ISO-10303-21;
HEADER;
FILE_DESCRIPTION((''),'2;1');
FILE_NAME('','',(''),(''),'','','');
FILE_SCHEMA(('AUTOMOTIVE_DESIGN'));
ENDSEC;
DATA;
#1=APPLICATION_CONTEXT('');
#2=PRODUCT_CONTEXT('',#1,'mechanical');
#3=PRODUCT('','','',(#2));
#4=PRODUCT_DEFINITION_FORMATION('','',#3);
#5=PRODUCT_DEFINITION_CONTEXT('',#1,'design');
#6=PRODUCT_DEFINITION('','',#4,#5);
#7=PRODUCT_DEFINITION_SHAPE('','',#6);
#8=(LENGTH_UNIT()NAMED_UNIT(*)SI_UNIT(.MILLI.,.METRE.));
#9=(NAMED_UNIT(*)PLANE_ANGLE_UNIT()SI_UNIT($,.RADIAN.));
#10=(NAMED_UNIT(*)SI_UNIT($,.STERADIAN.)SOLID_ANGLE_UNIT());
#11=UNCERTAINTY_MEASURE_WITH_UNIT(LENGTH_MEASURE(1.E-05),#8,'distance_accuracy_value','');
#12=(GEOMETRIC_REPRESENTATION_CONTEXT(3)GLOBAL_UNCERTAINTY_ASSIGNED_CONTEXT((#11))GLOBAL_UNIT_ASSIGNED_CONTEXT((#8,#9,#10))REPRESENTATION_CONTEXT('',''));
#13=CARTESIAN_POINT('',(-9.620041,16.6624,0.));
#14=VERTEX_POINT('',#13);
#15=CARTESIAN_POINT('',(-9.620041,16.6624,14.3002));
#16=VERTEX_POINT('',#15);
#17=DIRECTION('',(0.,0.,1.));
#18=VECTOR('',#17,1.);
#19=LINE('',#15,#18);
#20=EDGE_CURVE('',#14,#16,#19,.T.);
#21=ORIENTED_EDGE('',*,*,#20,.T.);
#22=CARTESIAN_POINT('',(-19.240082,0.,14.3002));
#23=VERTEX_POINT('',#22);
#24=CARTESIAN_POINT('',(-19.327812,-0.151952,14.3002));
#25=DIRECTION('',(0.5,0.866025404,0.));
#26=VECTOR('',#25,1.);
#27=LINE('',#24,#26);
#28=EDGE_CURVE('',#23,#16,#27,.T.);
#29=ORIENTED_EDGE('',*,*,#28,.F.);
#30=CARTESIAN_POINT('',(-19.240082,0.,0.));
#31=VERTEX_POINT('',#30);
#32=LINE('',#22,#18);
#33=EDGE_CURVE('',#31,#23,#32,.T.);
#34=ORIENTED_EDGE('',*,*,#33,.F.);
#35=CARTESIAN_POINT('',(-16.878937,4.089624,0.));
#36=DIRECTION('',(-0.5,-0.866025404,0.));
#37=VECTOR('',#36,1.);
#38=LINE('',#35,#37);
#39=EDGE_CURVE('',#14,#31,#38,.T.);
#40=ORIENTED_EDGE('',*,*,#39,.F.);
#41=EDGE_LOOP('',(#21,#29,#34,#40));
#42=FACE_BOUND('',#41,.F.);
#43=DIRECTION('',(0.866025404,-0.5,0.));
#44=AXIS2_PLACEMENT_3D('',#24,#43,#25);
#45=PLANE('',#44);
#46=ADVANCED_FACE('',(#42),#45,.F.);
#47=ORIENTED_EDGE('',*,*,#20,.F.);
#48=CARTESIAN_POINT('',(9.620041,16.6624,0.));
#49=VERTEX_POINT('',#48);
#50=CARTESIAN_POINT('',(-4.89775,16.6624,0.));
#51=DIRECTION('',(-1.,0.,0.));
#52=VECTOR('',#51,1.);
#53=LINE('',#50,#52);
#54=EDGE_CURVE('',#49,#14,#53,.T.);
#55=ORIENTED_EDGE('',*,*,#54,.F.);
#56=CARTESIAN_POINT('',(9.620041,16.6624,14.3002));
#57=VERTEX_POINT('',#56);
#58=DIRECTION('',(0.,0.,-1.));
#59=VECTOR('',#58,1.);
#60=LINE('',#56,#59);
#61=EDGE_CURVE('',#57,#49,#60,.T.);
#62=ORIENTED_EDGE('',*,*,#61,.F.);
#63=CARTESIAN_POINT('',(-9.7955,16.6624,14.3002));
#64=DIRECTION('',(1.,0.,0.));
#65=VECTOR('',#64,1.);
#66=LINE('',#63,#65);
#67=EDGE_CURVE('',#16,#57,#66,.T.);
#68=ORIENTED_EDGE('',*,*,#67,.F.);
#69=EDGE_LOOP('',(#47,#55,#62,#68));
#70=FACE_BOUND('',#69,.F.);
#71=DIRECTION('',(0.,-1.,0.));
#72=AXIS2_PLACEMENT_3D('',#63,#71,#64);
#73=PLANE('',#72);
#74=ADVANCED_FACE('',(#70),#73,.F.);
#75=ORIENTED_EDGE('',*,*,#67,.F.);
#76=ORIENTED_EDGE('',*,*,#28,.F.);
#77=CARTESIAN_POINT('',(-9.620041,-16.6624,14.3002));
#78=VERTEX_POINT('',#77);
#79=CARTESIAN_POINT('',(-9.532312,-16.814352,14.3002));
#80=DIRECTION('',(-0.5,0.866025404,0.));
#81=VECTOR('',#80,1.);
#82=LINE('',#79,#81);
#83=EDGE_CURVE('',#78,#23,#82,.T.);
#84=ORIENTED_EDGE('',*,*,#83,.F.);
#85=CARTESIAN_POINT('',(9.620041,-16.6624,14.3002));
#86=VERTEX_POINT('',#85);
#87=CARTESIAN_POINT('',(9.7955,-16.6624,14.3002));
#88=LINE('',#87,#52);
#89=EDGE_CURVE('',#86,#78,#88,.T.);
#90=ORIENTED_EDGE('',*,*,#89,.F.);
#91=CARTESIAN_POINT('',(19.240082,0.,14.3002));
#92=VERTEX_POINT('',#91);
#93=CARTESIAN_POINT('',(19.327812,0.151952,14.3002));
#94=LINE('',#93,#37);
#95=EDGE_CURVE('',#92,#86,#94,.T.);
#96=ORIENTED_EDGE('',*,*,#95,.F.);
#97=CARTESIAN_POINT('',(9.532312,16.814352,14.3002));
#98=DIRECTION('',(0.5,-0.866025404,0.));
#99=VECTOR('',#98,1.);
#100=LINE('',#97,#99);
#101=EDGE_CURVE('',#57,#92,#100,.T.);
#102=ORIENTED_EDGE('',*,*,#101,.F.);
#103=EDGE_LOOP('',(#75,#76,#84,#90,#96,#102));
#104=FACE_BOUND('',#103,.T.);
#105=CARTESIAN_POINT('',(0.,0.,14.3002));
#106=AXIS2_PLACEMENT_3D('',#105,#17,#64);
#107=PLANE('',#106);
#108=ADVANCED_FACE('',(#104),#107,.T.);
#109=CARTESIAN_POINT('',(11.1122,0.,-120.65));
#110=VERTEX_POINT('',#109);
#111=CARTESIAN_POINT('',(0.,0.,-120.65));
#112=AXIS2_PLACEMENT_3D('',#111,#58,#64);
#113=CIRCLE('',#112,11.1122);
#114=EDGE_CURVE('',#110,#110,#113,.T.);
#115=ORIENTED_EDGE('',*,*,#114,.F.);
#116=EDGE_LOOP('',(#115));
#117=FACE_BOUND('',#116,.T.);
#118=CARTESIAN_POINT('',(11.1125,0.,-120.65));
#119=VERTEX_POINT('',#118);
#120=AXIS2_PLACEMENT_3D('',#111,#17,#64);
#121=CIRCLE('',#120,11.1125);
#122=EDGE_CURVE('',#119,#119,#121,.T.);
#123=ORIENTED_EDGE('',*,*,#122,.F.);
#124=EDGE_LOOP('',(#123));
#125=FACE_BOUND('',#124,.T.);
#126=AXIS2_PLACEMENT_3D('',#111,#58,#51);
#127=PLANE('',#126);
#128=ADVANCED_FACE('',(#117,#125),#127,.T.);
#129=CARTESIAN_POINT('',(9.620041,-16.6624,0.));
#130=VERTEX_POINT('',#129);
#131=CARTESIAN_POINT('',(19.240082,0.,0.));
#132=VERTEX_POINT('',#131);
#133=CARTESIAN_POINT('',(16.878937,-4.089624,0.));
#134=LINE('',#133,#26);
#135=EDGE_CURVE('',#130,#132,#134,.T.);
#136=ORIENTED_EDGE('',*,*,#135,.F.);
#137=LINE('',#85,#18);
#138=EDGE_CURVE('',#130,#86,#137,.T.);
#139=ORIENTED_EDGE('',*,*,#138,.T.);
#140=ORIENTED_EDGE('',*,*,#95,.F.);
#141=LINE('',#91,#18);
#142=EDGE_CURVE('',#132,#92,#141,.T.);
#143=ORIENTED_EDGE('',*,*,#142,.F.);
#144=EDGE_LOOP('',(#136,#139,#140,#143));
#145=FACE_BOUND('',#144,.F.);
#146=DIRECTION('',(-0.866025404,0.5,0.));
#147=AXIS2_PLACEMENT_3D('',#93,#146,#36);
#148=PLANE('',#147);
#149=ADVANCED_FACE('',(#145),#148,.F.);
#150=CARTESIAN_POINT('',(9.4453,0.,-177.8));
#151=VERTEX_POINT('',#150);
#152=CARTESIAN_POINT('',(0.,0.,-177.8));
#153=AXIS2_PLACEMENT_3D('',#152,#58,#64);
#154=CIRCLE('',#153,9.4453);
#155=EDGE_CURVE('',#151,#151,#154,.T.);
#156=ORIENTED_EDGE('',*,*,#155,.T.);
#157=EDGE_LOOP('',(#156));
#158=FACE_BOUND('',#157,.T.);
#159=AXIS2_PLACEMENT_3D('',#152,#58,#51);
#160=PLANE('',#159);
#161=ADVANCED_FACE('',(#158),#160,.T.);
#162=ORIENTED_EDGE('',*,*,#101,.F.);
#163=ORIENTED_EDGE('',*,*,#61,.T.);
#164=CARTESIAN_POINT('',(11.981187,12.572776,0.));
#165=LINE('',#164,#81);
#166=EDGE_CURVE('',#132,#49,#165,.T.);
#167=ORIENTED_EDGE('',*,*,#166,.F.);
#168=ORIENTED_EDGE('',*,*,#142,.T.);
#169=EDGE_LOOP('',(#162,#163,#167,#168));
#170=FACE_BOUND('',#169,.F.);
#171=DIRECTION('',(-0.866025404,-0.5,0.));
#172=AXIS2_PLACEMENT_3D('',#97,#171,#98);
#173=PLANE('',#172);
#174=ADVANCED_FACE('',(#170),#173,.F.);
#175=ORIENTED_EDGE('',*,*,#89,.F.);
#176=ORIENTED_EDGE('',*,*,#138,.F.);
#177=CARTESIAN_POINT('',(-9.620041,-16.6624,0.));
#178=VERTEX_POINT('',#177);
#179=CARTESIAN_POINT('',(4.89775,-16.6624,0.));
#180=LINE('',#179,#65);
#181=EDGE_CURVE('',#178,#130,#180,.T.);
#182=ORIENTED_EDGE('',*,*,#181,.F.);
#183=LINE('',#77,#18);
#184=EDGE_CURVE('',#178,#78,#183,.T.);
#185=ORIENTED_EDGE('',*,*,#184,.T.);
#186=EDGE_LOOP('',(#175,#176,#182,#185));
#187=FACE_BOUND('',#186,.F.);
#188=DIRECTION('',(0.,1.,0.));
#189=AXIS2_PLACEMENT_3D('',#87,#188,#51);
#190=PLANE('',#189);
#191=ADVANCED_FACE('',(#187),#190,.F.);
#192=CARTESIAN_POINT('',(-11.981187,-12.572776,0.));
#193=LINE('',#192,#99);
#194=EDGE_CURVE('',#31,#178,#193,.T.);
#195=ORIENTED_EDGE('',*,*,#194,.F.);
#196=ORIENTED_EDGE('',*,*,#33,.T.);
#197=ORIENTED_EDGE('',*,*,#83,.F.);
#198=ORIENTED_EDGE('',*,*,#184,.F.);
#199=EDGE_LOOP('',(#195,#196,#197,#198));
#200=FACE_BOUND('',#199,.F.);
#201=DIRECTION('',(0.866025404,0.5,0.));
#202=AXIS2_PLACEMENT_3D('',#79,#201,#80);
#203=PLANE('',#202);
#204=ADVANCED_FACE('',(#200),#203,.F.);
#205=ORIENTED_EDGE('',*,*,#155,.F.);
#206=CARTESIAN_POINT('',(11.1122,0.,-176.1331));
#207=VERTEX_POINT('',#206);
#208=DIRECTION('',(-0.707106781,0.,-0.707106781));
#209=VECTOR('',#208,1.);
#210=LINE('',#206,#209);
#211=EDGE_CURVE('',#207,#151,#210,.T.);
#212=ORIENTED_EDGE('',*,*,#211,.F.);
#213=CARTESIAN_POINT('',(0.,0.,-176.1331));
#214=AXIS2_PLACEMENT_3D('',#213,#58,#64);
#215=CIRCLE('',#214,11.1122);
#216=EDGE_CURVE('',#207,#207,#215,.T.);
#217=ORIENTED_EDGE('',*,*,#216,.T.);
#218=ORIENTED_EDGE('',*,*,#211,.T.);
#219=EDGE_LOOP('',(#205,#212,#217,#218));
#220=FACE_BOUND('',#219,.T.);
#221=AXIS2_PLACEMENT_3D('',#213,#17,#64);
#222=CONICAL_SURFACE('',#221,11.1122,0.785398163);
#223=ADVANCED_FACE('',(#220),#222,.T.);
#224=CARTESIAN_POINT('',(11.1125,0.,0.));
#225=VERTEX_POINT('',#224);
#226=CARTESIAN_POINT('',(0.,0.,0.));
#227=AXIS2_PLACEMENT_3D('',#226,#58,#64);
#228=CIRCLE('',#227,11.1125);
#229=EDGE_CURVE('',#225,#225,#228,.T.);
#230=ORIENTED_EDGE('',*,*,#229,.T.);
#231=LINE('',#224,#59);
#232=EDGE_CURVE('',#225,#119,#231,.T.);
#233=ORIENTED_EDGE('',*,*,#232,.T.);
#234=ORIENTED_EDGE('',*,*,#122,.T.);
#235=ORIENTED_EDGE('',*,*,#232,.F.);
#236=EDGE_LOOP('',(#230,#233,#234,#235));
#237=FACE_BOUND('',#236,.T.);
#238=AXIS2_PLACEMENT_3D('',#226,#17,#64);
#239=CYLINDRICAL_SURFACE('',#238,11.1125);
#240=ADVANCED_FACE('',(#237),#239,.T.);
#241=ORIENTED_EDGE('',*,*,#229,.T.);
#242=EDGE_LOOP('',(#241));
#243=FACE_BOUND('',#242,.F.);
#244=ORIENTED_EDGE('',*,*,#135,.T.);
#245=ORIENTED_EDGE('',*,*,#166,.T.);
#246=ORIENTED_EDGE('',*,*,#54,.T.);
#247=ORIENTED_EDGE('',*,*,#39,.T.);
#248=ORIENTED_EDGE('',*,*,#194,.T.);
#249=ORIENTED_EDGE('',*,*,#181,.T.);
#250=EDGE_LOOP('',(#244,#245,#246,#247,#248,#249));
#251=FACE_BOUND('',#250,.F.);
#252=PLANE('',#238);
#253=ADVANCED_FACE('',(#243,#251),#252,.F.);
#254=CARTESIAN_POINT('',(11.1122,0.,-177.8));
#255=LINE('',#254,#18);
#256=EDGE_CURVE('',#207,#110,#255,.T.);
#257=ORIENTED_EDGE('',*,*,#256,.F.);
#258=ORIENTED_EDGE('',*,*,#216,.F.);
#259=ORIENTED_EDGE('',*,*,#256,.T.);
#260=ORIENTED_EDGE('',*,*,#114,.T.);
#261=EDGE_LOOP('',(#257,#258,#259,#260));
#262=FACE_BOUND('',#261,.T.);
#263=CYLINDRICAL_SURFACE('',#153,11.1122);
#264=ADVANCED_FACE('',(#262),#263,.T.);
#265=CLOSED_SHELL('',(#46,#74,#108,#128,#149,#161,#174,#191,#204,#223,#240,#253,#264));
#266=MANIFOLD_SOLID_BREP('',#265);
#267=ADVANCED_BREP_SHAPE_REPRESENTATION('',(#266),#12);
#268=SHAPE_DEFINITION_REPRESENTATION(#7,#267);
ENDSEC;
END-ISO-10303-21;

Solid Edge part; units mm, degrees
sketch "Sketch1" plane through (0, 0, 0) normal (0, 0, 1) x (1, 0, 0)
  circle A0 centre (0, 0) radius 19.3284
  dimension "D1" = 38.6568
extrude "Protrusion1" add sketch "Sketch1" along normal blind 14.3002
sketch "Sketch2" plane through (0, 0, 0) normal (0, 0, -1) x (1, 0, 0)
  circle A0 centre (0, 0) radius 11.1125
extrude "Protrusion2" add sketch "Sketch2" along normal blind 177.8
sketch "Sketch3" plane through (0, 0, -177.8) normal (0, 0, -1) x (1, 0, 0)
  circle A0 centre (0, 0) radius 11.1122
extrude "Cutout1" cut sketch "Sketch3" against normal blind 57.15 flip side to cut
chamfer "Chamfer_1" distance 1.6669 angle 45 1 edges at (-11.1122, 0, -177.8)
sketch "Sketch4" plane through (0, 0, 14.3002) normal (0, 0, 1) x (1, 0, 0)
  line L0 (-9.7955, 16.6624) -> (9.7955, 16.6624)
  dimension "D1" = 33.3248
extrude "Cutout2" cut sketch "Sketch4" against normal up to next material side at (0, 16.7124, 14.3002)
pattern_circular "Pattern1" count 6 over 360 about axis through (0, 0, 14.3002) along (0, 0, 1) of "Cutout2"
properties part number "24106793"
